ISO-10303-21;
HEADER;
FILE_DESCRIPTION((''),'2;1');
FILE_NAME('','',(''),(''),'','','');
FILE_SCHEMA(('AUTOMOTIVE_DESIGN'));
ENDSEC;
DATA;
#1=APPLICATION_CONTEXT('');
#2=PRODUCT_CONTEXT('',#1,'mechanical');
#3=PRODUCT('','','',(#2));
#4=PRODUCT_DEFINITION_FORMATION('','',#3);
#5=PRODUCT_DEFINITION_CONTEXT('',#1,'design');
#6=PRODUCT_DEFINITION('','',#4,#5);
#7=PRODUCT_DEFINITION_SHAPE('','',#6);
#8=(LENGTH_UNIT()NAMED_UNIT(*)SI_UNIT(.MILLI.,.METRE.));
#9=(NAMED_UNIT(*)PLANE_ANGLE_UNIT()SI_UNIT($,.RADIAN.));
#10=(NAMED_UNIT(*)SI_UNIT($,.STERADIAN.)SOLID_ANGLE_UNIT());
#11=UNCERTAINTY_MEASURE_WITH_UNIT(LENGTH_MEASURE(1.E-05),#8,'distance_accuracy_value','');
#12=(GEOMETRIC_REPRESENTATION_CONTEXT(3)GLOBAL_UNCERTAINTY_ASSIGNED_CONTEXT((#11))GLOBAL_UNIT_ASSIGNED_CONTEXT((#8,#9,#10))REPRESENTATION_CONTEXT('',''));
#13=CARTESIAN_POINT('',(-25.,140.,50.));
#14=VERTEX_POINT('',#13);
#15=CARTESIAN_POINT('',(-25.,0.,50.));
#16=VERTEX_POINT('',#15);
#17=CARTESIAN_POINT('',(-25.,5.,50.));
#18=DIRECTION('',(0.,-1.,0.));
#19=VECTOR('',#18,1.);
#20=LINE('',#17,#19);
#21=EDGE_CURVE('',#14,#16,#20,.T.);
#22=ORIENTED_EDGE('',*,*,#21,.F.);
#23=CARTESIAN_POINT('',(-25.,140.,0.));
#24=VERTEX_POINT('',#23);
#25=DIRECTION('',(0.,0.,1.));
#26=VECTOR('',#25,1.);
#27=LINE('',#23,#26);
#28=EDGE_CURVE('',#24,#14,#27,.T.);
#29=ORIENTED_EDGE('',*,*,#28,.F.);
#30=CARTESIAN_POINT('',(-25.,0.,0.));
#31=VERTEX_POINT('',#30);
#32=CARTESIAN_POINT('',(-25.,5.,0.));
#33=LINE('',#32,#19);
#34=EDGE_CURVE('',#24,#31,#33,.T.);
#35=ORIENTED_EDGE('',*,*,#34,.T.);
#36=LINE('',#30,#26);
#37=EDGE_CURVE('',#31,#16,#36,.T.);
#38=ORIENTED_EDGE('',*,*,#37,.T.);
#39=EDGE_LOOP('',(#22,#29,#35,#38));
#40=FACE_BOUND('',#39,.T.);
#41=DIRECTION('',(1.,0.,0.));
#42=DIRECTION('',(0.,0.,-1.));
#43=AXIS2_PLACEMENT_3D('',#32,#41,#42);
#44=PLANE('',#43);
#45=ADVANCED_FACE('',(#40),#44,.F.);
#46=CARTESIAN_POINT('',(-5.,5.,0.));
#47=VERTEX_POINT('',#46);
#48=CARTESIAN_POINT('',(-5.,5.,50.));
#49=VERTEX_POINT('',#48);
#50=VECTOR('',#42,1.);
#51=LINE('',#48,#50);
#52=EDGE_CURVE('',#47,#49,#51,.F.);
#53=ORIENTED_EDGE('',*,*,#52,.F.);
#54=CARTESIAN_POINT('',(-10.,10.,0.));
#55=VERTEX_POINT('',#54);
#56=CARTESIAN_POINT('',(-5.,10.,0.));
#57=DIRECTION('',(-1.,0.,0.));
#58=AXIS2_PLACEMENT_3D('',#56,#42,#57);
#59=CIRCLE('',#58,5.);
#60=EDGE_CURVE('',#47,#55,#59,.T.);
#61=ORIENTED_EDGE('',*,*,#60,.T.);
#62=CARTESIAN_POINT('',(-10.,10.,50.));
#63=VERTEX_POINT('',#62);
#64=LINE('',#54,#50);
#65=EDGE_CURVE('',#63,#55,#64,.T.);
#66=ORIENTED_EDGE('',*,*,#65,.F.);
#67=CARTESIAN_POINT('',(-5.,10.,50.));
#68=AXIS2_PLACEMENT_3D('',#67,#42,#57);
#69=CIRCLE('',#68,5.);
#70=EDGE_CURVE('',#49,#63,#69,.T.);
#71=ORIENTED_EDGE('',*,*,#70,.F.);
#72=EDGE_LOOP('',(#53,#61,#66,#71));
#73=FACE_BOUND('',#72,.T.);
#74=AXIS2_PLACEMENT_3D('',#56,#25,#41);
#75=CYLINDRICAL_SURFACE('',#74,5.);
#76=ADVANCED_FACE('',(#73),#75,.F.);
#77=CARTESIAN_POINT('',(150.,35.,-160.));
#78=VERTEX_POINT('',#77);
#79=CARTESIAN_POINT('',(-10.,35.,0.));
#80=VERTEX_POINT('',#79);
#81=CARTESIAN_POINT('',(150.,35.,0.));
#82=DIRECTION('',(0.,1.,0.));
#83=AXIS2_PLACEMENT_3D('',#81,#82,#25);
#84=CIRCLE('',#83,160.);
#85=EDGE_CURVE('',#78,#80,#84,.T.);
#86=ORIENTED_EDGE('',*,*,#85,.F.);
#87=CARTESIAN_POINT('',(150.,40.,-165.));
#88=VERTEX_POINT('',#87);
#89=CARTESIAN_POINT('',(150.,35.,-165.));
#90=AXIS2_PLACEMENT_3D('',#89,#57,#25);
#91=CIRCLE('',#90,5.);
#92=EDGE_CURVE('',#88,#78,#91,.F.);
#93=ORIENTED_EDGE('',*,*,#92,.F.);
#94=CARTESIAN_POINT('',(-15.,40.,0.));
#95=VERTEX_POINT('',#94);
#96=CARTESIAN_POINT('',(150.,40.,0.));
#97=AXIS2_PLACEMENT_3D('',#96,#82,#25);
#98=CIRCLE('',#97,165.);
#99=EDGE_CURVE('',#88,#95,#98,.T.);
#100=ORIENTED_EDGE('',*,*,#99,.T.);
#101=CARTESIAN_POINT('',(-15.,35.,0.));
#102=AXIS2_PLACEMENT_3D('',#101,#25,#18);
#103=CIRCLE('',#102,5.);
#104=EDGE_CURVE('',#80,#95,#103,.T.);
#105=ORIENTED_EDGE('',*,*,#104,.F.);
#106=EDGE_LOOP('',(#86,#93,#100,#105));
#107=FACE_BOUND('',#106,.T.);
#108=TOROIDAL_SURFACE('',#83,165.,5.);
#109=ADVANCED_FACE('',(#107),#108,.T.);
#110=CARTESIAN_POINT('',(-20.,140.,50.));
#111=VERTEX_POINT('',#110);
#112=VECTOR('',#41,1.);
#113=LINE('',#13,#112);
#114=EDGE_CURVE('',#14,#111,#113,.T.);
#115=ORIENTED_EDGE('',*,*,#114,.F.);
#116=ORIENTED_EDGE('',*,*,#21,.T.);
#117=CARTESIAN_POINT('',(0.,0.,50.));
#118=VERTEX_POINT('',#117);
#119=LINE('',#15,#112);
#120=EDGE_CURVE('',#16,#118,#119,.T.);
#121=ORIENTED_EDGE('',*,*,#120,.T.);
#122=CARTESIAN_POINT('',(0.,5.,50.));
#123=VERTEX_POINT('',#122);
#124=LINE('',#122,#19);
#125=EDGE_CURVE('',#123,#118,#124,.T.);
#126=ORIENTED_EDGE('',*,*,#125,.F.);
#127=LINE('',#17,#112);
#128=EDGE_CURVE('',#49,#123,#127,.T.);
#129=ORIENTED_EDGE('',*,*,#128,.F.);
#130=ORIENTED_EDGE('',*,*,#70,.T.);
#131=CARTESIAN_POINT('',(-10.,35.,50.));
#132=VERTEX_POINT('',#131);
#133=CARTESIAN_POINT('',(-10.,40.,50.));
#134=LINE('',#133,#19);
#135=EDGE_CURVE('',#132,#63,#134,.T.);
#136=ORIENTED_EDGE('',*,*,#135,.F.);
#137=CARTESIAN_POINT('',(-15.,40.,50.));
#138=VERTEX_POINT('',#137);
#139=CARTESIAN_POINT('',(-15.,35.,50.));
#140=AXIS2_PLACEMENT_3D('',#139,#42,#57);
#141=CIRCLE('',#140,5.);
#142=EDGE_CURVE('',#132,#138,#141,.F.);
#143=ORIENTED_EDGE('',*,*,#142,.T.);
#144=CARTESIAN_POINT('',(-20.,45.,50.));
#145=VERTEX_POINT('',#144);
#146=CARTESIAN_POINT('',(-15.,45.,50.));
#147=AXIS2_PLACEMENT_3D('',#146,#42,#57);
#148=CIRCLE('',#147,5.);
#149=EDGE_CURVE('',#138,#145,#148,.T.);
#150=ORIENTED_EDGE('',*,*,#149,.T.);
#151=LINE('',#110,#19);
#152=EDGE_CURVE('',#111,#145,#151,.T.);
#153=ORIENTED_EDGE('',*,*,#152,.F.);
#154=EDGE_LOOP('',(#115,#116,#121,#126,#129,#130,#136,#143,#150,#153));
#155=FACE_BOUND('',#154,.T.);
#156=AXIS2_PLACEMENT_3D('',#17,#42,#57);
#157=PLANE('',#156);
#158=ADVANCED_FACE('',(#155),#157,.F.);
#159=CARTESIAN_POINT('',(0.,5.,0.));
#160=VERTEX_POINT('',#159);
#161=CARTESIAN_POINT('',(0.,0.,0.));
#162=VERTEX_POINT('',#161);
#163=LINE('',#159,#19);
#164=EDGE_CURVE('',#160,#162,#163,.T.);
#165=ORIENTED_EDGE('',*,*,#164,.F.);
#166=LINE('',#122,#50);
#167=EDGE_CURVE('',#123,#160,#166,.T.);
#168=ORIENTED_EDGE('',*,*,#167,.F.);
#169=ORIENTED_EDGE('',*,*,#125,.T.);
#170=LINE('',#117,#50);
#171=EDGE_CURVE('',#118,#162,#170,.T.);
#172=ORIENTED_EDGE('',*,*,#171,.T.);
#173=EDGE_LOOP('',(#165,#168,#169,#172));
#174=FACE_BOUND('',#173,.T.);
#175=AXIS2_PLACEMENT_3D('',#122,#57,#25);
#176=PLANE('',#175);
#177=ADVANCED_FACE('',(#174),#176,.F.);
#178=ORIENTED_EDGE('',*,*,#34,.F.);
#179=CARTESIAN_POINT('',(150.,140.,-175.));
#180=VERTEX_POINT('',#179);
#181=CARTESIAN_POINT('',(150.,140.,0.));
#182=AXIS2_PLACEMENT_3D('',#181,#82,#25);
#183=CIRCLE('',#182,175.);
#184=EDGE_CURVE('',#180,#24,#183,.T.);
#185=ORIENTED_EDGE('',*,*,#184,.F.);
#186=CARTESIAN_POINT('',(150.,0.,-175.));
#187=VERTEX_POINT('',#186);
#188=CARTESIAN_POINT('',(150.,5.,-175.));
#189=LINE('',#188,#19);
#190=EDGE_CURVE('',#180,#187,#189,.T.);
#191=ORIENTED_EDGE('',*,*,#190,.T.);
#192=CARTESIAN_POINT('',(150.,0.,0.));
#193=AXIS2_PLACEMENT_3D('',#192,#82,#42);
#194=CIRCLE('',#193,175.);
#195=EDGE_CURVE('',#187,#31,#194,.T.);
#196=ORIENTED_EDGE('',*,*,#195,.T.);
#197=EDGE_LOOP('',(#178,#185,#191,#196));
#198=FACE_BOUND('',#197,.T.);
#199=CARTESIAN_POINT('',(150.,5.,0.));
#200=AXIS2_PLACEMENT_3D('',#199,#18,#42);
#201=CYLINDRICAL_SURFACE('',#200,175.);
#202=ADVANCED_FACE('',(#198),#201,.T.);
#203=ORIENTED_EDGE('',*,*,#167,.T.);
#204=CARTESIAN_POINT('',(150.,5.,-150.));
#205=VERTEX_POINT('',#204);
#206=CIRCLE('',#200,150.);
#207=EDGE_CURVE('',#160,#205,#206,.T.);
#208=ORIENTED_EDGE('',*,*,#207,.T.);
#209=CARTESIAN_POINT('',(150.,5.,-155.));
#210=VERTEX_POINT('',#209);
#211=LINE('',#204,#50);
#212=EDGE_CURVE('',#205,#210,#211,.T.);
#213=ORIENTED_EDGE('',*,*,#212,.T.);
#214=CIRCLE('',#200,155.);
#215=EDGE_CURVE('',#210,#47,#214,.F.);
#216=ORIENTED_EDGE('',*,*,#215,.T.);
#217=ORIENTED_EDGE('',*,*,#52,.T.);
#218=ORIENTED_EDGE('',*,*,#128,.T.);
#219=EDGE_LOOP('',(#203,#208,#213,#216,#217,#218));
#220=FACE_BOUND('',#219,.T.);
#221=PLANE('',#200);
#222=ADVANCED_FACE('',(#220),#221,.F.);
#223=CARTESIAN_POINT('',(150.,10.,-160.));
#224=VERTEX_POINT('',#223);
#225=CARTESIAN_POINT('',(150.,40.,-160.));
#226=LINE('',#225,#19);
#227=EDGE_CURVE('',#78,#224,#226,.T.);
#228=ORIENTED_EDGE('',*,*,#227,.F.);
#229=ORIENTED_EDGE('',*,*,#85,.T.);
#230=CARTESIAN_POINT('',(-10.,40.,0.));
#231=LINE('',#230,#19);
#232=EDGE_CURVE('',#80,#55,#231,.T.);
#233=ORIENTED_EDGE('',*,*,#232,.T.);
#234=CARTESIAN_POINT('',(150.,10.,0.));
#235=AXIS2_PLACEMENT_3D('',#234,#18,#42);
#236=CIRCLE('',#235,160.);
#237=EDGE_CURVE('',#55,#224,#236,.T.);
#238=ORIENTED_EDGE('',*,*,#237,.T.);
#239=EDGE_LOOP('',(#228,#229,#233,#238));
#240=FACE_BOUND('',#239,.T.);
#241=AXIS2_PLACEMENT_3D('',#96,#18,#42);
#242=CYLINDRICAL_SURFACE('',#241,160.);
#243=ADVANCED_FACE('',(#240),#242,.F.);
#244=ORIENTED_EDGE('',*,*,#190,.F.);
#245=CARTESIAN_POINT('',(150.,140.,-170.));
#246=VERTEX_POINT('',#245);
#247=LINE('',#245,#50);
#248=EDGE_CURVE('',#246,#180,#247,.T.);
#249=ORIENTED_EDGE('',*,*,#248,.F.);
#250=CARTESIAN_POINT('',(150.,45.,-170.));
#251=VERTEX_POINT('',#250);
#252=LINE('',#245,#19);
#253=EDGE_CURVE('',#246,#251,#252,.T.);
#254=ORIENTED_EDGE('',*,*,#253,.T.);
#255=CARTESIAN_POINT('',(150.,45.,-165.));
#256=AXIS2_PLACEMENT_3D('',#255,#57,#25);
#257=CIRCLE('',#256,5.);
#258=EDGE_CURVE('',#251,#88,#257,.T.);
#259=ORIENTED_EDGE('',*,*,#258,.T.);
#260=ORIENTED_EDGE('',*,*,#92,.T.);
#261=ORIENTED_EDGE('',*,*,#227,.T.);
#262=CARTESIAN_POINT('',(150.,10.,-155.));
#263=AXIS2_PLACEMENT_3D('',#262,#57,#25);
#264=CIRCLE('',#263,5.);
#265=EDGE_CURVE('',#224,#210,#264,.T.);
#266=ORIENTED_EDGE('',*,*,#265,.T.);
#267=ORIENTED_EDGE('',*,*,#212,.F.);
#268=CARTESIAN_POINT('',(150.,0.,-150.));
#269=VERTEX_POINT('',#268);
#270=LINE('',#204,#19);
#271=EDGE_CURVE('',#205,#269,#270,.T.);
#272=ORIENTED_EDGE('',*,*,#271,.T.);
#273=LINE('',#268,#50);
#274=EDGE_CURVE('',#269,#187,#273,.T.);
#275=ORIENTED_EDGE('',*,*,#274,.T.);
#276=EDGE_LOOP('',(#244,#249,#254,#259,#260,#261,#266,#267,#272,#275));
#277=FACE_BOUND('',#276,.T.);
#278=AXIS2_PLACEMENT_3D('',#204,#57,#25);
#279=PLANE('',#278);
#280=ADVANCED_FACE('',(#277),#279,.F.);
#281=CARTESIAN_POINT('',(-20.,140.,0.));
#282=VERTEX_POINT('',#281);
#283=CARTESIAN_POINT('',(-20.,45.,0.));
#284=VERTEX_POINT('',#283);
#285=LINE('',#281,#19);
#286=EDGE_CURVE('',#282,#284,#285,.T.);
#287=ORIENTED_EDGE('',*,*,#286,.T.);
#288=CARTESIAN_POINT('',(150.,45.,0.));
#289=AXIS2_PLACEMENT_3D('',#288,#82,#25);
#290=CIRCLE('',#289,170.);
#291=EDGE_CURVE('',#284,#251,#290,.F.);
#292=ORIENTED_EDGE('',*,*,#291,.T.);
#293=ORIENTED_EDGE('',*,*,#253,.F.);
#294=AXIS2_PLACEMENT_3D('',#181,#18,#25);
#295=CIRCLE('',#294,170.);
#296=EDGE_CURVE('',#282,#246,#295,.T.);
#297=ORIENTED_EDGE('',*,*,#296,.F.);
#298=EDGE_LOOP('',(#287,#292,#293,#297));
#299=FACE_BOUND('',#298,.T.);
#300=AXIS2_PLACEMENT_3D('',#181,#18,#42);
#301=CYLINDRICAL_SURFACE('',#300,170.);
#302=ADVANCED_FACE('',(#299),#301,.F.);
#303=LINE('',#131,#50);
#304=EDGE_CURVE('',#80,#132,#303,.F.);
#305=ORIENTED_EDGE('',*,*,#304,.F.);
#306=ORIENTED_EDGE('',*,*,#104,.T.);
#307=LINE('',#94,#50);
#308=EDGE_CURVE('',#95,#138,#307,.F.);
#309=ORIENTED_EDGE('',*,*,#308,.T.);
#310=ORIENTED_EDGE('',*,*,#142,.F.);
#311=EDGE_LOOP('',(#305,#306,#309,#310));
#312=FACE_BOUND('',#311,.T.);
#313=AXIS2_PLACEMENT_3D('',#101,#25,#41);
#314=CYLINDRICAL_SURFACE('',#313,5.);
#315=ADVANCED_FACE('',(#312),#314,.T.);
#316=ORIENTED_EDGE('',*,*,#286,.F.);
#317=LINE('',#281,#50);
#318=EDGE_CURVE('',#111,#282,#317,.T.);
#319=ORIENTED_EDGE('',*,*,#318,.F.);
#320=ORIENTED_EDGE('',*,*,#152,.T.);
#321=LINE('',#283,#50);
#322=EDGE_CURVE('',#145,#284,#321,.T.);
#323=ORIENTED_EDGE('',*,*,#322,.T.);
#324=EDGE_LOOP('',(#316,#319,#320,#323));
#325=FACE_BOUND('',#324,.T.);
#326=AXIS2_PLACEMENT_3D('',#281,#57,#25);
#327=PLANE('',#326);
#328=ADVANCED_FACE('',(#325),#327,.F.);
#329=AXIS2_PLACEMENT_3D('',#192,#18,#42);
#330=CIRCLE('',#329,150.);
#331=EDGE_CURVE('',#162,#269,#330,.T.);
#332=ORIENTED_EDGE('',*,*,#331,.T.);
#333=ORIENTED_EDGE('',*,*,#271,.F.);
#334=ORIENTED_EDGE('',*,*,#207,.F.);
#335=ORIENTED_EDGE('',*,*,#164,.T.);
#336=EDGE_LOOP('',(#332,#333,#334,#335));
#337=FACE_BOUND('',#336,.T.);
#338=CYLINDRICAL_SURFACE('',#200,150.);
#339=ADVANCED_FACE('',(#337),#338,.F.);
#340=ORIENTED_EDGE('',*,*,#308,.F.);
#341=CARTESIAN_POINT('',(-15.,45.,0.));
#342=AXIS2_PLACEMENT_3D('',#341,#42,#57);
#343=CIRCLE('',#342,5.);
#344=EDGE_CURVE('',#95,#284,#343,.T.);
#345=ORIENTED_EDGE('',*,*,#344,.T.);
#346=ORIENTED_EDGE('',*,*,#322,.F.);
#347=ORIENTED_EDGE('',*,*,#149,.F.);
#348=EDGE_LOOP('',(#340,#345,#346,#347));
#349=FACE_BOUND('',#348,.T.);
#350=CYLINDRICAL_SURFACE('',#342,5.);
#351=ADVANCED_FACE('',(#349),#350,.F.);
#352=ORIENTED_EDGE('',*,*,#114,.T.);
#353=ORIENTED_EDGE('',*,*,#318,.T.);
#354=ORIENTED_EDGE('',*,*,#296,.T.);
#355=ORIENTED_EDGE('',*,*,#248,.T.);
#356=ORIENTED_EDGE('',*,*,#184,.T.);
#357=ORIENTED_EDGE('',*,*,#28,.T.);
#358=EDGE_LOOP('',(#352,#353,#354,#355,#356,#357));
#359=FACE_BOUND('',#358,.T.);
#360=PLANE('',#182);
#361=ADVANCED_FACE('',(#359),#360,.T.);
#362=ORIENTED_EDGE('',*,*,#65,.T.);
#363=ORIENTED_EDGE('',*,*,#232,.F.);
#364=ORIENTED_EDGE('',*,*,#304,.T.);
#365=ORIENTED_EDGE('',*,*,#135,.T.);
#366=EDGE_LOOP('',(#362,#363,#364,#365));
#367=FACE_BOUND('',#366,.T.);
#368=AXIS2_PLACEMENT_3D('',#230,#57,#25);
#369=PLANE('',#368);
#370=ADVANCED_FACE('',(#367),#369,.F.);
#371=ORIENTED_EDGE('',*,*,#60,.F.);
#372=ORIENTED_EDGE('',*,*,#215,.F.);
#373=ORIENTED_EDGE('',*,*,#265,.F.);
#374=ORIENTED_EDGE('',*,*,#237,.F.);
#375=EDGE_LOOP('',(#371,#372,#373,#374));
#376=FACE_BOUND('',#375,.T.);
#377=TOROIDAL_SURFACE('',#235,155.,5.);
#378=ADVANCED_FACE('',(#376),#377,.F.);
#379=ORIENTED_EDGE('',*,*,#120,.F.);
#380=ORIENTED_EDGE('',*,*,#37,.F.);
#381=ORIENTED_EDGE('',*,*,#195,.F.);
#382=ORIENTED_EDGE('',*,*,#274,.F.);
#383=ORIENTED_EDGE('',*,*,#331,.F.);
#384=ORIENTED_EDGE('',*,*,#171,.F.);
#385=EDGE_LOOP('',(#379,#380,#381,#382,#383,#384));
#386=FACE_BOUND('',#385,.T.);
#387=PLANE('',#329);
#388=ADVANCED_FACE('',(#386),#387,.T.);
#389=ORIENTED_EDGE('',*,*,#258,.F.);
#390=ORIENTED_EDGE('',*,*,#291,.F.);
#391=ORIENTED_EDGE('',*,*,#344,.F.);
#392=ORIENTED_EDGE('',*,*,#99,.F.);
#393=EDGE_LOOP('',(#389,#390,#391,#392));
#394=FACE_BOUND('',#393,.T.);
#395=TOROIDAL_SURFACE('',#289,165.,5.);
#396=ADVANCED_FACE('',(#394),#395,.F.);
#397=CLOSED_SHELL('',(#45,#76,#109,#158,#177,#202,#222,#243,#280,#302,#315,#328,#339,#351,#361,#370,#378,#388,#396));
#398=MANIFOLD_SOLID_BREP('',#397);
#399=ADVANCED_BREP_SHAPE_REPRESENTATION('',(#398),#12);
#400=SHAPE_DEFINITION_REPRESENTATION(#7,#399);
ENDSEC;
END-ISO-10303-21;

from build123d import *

# Parameters (mm, degrees)
BOTTOM_LEVEL_DEPTH = 5
MID_LEVEL_DEPTH    = 35
GUARD_RAIL_DEPTH   = 100
ROUNDING_R         = 5


with BuildPart() as part:
    # Sketch1 → Bottom level (new body)
    with BuildSketch(Plane(origin=(0, 0, 0), x_dir=(1, 0, 0), z_dir=(0, 1, 0))):
        with BuildLine():
            Line((150, 150), (150, 175))
            ThreePointArc((150, 175), (26.256313292, 123.743686708), (-25, 0))
            Line((-25, 0), (-25, -50))
            Line((-25, -50), (0, -50))
            Line((0, -50), (0, 0))
            ThreePointArc((0, 0), (43.933982822, 106.066017178), (150, 150))
        make_face()
    extrude(amount=BOTTOM_LEVEL_DEPTH)

    # Sketch2 → Mid level (add)
    with BuildSketch(Plane(origin=(0, 5, 0), x_dir=(1, 0, 0), z_dir=(0, 1, 0))):
        with BuildLine():
            Line((-25, 0), (-25, -50))
            Line((-25, -50), (-10, -50))
            Line((-10, -50), (-10, 0))
            ThreePointArc((-10, 0), (36.86291501, 113.13708499), (150, 160))
            Line((150, 160), (150, 175))
            ThreePointArc((150, 175), (26.256313292, 123.743686708), (-25, 0))
        make_face()
    extrude(amount=MID_LEVEL_DEPTH)

    # Sketch3 → Guard rail (add)
    with BuildSketch(Plane(origin=(0, 40, 0), x_dir=(1, 0, 0), z_dir=(0, 1, 0))):
        with BuildLine():
            Line((-25, 0), (-25, -50))
            Line((-25, -50), (-20, -50))
            Line((-20, -50), (-20, 0))
            ThreePointArc((-20, 0), (29.791847198, 120.208152802), (150, 170))
            Line((150, 170), (150, 175))
            ThreePointArc((150, 175), (26.256313292, 123.743686708), (-25, 0))
        make_face()
    extrude(amount=GUARD_RAIL_DEPTH)

    # Rounding
    rounding_edges = [part.edges().sort_by_distance(p)[0] for p in [
        (-10, 5, 25),
        (-10, 40, 25),
        (-20, 40, 25),
        (36.86291501, 5, -113.13708499),
        (36.86291501, 40, -113.13708499),
        (29.791847198, 40, -120.208152802),
    ]]
    fillet(rounding_edges, radius=ROUNDING_R - 0.0001)  # a hair under: the kernel refuses the full size


solid = part.part
